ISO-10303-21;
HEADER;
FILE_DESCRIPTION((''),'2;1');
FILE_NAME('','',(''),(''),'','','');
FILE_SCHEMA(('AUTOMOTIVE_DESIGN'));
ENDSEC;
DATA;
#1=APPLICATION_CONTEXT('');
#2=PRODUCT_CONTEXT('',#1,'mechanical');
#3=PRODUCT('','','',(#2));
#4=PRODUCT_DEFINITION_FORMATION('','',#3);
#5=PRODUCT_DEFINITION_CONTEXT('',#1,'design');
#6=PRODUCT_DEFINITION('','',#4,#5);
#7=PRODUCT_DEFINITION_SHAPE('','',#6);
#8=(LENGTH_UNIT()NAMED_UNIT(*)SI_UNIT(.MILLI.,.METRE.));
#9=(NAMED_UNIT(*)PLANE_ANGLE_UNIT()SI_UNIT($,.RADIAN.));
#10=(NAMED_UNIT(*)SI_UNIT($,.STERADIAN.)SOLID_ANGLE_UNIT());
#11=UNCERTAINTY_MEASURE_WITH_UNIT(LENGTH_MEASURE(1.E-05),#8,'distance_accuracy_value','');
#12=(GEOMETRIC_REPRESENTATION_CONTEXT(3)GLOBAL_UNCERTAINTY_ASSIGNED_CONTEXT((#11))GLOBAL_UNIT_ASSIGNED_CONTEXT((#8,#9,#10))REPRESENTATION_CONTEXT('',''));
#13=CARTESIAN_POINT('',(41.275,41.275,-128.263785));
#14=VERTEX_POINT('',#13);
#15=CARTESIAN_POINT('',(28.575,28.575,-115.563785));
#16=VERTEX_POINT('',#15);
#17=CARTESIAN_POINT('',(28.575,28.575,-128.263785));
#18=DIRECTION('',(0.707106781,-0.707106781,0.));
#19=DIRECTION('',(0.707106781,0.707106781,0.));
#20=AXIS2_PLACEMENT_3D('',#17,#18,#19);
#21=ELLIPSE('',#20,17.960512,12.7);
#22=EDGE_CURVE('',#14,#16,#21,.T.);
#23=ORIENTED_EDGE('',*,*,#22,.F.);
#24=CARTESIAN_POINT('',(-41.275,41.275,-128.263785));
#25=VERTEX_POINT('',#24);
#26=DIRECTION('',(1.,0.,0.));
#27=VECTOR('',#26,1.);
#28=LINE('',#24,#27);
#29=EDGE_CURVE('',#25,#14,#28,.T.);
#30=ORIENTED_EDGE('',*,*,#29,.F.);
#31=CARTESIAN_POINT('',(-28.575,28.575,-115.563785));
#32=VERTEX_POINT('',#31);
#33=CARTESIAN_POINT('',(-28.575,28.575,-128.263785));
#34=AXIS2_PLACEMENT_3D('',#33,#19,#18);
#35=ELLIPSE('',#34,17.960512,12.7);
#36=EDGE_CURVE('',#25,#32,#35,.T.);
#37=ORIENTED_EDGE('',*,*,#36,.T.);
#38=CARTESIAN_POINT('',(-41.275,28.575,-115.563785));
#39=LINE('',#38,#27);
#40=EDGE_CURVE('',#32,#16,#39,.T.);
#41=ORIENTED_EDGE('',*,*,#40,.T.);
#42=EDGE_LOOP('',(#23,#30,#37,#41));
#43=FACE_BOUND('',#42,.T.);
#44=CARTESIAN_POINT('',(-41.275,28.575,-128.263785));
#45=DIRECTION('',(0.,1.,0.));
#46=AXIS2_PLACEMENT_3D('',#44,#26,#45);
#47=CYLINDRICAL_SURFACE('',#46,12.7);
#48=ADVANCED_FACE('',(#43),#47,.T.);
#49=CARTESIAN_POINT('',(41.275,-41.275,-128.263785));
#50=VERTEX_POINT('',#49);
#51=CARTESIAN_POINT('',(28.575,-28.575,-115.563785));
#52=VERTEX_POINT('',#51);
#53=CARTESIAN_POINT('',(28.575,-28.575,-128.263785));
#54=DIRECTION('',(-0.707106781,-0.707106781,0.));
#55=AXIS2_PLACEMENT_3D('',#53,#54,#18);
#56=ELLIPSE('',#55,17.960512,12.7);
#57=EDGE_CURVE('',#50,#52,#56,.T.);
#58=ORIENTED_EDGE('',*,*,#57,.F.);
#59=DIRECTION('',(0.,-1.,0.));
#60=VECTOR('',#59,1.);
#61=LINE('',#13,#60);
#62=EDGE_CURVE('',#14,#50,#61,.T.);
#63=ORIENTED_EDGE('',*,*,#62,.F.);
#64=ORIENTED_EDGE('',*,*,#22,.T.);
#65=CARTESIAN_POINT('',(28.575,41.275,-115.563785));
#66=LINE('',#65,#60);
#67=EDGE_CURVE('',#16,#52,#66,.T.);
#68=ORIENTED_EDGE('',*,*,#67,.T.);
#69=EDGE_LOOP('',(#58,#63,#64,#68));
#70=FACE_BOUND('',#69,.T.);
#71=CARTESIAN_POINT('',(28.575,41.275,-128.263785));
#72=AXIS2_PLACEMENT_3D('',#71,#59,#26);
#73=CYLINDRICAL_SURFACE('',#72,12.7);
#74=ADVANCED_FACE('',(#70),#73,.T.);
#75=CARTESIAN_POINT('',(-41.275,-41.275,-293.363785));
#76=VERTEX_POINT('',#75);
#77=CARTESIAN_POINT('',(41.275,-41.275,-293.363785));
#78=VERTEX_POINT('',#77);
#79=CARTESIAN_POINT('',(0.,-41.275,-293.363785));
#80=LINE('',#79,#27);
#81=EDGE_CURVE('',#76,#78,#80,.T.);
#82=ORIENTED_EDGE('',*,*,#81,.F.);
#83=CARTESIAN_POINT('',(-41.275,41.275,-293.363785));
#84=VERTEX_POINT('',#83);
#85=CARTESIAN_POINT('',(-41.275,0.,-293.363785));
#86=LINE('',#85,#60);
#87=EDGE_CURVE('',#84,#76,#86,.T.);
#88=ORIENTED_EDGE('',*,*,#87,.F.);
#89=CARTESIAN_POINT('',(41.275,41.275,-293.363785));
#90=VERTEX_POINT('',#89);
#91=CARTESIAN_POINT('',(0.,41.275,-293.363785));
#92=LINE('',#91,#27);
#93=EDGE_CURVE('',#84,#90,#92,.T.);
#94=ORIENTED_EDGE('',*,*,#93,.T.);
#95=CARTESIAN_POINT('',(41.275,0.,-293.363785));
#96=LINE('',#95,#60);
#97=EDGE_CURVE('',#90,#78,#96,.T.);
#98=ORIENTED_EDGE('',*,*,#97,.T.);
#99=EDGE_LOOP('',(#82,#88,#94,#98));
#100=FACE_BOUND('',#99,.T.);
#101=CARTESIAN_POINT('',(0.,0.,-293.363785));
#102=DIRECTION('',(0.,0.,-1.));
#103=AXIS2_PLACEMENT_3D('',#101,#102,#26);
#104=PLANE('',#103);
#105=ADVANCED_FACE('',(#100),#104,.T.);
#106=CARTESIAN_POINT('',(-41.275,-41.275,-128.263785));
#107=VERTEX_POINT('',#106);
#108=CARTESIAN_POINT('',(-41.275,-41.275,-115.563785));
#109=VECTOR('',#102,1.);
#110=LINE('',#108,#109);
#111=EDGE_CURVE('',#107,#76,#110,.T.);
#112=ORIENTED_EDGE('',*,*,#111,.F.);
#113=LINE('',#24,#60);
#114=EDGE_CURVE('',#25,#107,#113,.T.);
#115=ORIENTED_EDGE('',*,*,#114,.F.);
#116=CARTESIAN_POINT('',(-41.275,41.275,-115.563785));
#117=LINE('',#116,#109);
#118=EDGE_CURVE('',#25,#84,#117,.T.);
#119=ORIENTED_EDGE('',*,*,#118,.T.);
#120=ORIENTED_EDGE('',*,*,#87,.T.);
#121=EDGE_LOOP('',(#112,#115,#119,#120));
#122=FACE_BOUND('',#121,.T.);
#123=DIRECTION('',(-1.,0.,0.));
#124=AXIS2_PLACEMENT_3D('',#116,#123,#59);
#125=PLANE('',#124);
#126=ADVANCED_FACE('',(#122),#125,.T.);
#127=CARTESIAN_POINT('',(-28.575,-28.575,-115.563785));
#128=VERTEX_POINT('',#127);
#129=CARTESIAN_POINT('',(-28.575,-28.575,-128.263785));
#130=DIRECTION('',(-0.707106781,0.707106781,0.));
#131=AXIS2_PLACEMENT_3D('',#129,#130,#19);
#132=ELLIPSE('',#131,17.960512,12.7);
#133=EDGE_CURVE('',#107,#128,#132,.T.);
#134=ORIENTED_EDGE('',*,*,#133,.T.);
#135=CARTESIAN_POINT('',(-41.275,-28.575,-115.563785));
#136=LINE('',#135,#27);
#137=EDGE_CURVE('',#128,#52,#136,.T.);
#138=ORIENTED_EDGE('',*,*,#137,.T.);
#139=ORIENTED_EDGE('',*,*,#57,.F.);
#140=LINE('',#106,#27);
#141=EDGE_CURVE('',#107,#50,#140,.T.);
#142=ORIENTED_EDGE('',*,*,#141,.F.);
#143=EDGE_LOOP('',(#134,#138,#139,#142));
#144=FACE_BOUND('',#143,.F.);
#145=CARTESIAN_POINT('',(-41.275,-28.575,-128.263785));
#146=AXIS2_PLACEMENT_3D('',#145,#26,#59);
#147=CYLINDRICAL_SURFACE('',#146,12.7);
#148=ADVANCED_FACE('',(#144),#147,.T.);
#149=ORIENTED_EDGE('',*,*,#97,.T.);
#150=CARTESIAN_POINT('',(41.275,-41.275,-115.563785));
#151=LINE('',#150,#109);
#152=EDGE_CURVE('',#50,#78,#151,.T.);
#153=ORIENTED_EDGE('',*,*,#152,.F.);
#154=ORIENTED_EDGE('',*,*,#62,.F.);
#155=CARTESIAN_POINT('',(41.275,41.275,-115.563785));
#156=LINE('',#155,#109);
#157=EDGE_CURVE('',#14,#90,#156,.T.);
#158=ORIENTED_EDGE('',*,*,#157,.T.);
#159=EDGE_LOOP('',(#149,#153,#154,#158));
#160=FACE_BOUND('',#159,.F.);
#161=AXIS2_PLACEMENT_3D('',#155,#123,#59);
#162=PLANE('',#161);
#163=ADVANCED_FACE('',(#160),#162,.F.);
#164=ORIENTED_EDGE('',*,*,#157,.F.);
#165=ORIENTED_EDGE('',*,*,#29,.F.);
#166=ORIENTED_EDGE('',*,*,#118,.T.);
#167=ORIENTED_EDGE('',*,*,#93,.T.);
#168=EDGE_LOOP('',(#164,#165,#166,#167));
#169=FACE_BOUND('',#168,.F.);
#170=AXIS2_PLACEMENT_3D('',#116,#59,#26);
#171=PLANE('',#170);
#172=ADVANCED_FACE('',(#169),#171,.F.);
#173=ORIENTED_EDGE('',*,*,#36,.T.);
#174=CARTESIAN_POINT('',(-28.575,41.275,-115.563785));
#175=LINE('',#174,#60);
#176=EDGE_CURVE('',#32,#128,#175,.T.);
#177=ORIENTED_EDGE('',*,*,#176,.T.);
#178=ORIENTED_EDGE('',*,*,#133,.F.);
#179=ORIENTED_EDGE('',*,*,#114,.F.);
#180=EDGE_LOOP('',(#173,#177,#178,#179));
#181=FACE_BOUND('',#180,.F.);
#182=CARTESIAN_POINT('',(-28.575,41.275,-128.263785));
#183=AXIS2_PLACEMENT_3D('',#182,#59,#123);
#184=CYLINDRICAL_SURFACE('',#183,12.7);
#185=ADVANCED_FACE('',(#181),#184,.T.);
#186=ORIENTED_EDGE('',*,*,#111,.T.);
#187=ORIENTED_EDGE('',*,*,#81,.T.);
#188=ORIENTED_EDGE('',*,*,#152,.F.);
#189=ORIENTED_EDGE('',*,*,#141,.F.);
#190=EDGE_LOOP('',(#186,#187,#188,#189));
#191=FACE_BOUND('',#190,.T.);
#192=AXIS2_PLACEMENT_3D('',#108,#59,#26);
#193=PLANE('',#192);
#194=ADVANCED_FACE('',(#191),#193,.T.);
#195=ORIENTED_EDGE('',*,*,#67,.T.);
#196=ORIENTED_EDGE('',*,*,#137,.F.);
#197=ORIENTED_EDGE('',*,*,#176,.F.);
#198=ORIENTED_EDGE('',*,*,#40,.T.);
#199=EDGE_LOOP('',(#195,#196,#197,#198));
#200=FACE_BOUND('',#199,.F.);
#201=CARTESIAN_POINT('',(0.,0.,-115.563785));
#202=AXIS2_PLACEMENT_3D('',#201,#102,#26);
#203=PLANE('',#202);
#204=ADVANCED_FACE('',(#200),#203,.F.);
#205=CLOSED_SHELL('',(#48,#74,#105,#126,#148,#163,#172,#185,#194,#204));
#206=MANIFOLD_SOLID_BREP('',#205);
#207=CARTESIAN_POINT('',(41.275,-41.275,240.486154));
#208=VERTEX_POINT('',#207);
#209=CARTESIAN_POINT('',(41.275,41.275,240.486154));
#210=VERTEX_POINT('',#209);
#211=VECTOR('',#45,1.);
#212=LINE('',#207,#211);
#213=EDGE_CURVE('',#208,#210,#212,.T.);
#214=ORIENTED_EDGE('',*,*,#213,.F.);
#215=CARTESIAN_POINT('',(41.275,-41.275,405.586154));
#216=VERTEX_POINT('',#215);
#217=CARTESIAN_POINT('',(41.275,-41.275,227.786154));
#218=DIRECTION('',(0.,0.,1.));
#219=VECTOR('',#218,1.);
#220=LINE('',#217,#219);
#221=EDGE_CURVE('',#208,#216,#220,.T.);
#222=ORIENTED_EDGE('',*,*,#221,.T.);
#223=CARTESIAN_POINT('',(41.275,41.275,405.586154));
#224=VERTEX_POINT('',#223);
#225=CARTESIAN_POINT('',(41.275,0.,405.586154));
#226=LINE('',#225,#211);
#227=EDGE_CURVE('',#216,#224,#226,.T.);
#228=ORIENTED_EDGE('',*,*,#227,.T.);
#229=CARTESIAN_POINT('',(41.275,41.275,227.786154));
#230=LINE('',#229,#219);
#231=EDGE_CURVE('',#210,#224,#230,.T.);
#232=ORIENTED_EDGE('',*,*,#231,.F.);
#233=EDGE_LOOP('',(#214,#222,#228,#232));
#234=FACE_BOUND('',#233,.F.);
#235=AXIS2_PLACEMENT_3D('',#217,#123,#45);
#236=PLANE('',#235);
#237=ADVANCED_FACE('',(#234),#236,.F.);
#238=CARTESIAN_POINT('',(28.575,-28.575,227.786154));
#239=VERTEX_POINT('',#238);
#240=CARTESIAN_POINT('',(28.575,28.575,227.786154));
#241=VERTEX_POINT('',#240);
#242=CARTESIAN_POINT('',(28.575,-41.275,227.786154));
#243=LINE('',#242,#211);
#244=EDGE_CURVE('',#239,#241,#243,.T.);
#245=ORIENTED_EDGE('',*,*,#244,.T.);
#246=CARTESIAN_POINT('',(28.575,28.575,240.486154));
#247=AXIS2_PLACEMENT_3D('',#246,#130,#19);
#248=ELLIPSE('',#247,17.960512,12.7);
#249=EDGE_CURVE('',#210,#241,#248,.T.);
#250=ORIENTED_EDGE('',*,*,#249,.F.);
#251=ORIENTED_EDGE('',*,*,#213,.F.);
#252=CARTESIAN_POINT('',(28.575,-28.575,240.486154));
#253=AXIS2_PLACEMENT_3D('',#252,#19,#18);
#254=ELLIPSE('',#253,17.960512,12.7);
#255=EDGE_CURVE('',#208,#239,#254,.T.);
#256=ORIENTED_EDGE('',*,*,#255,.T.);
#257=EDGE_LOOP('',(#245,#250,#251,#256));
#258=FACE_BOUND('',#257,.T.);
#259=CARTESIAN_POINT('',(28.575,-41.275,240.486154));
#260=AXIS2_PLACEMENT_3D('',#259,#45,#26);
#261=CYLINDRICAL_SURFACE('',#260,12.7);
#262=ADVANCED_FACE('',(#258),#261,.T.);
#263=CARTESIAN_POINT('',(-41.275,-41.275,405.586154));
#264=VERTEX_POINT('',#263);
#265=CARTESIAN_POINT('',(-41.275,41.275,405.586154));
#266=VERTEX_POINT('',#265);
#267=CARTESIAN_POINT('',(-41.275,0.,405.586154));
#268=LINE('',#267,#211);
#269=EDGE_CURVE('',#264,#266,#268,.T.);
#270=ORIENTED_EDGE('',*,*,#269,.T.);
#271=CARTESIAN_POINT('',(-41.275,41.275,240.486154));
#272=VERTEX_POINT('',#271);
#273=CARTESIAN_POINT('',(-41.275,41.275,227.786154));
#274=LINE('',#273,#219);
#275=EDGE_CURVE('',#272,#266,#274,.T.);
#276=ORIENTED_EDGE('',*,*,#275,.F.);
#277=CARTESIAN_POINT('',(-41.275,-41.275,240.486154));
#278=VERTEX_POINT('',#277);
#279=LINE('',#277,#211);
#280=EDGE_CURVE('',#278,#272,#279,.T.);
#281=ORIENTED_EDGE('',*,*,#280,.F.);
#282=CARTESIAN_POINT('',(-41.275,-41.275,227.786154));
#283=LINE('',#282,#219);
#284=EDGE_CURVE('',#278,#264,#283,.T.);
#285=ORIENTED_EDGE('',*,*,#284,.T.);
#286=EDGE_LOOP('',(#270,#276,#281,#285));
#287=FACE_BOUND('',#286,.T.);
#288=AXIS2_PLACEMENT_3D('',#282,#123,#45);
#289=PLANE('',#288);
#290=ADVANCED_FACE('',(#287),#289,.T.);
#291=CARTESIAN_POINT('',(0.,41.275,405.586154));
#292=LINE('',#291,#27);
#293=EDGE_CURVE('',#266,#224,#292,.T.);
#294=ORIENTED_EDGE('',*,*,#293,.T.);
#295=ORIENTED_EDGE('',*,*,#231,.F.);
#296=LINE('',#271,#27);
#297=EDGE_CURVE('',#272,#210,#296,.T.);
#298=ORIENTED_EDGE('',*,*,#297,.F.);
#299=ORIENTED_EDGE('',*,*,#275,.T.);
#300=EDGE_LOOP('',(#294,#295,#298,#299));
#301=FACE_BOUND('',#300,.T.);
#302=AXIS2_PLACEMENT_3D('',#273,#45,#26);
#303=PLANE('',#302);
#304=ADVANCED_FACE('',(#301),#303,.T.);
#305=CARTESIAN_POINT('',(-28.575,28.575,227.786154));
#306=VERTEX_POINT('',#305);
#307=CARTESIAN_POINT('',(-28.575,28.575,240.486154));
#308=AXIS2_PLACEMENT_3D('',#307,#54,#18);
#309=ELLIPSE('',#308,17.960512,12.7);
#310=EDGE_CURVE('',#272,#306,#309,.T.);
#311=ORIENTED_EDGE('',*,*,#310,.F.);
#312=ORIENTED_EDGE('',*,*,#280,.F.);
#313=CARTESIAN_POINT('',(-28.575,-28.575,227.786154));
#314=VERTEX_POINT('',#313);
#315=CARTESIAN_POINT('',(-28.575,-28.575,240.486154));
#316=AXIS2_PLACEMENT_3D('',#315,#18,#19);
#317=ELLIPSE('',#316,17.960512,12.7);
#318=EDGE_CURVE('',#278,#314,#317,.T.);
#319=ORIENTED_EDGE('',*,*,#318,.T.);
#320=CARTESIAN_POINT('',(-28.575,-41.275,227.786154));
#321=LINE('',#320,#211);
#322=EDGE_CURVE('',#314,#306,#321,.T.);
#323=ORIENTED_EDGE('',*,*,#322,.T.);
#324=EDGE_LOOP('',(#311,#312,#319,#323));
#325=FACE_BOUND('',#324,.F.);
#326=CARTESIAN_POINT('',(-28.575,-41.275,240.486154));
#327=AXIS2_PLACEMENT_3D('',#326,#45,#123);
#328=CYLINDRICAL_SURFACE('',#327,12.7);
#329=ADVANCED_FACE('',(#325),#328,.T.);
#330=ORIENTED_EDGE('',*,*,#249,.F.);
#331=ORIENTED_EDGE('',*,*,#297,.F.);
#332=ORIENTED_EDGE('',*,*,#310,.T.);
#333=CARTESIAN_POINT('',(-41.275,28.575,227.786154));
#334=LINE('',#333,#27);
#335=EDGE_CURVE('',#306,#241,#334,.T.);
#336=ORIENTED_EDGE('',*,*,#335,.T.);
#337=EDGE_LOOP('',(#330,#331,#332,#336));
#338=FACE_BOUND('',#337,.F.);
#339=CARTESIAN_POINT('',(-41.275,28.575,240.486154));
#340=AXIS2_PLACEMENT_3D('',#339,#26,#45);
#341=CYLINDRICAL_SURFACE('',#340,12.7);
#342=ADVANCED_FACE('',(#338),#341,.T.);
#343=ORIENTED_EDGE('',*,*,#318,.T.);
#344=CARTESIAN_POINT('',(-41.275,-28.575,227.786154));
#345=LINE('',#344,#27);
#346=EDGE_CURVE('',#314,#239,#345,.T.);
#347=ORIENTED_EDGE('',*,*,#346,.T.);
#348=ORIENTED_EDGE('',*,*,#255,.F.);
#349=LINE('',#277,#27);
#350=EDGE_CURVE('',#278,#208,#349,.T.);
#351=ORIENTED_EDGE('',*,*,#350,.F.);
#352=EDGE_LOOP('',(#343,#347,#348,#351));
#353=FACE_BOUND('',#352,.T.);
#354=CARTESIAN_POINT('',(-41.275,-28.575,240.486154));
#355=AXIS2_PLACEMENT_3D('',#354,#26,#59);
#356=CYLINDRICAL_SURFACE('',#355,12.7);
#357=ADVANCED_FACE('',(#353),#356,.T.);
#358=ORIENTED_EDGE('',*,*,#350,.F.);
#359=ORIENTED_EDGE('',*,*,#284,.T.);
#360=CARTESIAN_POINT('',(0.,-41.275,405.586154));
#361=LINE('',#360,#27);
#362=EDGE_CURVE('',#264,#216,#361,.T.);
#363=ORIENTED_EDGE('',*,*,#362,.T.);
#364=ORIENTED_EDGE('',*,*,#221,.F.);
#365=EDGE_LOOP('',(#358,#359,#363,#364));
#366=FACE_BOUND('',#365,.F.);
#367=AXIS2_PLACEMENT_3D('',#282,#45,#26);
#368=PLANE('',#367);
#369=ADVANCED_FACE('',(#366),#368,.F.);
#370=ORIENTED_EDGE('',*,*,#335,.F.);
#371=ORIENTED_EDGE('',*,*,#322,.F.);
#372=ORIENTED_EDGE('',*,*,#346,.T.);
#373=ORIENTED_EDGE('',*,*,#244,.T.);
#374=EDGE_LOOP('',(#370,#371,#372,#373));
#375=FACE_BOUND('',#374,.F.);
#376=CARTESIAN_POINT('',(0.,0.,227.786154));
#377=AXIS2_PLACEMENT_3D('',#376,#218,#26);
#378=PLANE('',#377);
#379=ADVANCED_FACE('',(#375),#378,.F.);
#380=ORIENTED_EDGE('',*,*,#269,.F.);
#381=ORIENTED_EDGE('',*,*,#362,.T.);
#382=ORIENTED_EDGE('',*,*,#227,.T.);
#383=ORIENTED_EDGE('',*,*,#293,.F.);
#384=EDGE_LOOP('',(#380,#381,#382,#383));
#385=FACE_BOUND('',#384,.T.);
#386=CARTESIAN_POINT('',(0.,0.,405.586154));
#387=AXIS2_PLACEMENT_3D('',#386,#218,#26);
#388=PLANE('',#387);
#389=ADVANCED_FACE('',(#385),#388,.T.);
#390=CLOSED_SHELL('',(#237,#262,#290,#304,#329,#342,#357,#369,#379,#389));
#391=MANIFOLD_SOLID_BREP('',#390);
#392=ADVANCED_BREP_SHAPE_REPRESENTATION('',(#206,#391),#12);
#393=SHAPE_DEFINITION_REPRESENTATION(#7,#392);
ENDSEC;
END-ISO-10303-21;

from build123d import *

# Parameters (mm, degrees)
F2_W     = 82.55
F2_H     = 82.55
F3_DEPTH = 177.8
F4_W     = 82.55
F4_H     = 82.55
F5_DEPTH = 177.8
F6_R     = 12.7
F7_R     = 12.7


# Not quite as in the source:
# - the program builds the solid bodies; features that only make, move or delete a surface that nothing else refers to are left out


with BuildPart() as f3:
    # F2 (on face) → F3 (new body)
    with BuildSketch(Plane(origin=(0, 0, -115.5637845452), x_dir=(1, 0, 0), z_dir=(0, 0, -1))):
        Rectangle(F2_W, F2_H)
    extrude(amount=F3_DEPTH)

    # F7
    f7_edges = [f3.edges().sort_by_distance(p)[0] for p in [
        (0, 41.275, -115.563785),
        (41.275, 0, -115.563785),
        (0, -41.275, -115.563785),
        (-41.275, 0, -115.563785),
    ]]
    fillet(f7_edges, radius=F7_R)


with BuildPart() as f5:
    # F4 (on face) → F5 (new body)
    with BuildSketch(Plane.XY.offset(227.7861535549)):
        Rectangle(F4_W, F4_H)
    extrude(amount=F5_DEPTH)

    # F6
    f6_edges = [f5.edges().sort_by_distance(p)[0] for p in [
        (0, -41.275, 227.786154),
        (41.275, 0, 227.786154),
        (0, 41.275, 227.786154),
        (-41.275, 0, 227.786154),
    ]]
    fillet(f6_edges, radius=F6_R)


solid = Compound([f3.part, f5.part])
